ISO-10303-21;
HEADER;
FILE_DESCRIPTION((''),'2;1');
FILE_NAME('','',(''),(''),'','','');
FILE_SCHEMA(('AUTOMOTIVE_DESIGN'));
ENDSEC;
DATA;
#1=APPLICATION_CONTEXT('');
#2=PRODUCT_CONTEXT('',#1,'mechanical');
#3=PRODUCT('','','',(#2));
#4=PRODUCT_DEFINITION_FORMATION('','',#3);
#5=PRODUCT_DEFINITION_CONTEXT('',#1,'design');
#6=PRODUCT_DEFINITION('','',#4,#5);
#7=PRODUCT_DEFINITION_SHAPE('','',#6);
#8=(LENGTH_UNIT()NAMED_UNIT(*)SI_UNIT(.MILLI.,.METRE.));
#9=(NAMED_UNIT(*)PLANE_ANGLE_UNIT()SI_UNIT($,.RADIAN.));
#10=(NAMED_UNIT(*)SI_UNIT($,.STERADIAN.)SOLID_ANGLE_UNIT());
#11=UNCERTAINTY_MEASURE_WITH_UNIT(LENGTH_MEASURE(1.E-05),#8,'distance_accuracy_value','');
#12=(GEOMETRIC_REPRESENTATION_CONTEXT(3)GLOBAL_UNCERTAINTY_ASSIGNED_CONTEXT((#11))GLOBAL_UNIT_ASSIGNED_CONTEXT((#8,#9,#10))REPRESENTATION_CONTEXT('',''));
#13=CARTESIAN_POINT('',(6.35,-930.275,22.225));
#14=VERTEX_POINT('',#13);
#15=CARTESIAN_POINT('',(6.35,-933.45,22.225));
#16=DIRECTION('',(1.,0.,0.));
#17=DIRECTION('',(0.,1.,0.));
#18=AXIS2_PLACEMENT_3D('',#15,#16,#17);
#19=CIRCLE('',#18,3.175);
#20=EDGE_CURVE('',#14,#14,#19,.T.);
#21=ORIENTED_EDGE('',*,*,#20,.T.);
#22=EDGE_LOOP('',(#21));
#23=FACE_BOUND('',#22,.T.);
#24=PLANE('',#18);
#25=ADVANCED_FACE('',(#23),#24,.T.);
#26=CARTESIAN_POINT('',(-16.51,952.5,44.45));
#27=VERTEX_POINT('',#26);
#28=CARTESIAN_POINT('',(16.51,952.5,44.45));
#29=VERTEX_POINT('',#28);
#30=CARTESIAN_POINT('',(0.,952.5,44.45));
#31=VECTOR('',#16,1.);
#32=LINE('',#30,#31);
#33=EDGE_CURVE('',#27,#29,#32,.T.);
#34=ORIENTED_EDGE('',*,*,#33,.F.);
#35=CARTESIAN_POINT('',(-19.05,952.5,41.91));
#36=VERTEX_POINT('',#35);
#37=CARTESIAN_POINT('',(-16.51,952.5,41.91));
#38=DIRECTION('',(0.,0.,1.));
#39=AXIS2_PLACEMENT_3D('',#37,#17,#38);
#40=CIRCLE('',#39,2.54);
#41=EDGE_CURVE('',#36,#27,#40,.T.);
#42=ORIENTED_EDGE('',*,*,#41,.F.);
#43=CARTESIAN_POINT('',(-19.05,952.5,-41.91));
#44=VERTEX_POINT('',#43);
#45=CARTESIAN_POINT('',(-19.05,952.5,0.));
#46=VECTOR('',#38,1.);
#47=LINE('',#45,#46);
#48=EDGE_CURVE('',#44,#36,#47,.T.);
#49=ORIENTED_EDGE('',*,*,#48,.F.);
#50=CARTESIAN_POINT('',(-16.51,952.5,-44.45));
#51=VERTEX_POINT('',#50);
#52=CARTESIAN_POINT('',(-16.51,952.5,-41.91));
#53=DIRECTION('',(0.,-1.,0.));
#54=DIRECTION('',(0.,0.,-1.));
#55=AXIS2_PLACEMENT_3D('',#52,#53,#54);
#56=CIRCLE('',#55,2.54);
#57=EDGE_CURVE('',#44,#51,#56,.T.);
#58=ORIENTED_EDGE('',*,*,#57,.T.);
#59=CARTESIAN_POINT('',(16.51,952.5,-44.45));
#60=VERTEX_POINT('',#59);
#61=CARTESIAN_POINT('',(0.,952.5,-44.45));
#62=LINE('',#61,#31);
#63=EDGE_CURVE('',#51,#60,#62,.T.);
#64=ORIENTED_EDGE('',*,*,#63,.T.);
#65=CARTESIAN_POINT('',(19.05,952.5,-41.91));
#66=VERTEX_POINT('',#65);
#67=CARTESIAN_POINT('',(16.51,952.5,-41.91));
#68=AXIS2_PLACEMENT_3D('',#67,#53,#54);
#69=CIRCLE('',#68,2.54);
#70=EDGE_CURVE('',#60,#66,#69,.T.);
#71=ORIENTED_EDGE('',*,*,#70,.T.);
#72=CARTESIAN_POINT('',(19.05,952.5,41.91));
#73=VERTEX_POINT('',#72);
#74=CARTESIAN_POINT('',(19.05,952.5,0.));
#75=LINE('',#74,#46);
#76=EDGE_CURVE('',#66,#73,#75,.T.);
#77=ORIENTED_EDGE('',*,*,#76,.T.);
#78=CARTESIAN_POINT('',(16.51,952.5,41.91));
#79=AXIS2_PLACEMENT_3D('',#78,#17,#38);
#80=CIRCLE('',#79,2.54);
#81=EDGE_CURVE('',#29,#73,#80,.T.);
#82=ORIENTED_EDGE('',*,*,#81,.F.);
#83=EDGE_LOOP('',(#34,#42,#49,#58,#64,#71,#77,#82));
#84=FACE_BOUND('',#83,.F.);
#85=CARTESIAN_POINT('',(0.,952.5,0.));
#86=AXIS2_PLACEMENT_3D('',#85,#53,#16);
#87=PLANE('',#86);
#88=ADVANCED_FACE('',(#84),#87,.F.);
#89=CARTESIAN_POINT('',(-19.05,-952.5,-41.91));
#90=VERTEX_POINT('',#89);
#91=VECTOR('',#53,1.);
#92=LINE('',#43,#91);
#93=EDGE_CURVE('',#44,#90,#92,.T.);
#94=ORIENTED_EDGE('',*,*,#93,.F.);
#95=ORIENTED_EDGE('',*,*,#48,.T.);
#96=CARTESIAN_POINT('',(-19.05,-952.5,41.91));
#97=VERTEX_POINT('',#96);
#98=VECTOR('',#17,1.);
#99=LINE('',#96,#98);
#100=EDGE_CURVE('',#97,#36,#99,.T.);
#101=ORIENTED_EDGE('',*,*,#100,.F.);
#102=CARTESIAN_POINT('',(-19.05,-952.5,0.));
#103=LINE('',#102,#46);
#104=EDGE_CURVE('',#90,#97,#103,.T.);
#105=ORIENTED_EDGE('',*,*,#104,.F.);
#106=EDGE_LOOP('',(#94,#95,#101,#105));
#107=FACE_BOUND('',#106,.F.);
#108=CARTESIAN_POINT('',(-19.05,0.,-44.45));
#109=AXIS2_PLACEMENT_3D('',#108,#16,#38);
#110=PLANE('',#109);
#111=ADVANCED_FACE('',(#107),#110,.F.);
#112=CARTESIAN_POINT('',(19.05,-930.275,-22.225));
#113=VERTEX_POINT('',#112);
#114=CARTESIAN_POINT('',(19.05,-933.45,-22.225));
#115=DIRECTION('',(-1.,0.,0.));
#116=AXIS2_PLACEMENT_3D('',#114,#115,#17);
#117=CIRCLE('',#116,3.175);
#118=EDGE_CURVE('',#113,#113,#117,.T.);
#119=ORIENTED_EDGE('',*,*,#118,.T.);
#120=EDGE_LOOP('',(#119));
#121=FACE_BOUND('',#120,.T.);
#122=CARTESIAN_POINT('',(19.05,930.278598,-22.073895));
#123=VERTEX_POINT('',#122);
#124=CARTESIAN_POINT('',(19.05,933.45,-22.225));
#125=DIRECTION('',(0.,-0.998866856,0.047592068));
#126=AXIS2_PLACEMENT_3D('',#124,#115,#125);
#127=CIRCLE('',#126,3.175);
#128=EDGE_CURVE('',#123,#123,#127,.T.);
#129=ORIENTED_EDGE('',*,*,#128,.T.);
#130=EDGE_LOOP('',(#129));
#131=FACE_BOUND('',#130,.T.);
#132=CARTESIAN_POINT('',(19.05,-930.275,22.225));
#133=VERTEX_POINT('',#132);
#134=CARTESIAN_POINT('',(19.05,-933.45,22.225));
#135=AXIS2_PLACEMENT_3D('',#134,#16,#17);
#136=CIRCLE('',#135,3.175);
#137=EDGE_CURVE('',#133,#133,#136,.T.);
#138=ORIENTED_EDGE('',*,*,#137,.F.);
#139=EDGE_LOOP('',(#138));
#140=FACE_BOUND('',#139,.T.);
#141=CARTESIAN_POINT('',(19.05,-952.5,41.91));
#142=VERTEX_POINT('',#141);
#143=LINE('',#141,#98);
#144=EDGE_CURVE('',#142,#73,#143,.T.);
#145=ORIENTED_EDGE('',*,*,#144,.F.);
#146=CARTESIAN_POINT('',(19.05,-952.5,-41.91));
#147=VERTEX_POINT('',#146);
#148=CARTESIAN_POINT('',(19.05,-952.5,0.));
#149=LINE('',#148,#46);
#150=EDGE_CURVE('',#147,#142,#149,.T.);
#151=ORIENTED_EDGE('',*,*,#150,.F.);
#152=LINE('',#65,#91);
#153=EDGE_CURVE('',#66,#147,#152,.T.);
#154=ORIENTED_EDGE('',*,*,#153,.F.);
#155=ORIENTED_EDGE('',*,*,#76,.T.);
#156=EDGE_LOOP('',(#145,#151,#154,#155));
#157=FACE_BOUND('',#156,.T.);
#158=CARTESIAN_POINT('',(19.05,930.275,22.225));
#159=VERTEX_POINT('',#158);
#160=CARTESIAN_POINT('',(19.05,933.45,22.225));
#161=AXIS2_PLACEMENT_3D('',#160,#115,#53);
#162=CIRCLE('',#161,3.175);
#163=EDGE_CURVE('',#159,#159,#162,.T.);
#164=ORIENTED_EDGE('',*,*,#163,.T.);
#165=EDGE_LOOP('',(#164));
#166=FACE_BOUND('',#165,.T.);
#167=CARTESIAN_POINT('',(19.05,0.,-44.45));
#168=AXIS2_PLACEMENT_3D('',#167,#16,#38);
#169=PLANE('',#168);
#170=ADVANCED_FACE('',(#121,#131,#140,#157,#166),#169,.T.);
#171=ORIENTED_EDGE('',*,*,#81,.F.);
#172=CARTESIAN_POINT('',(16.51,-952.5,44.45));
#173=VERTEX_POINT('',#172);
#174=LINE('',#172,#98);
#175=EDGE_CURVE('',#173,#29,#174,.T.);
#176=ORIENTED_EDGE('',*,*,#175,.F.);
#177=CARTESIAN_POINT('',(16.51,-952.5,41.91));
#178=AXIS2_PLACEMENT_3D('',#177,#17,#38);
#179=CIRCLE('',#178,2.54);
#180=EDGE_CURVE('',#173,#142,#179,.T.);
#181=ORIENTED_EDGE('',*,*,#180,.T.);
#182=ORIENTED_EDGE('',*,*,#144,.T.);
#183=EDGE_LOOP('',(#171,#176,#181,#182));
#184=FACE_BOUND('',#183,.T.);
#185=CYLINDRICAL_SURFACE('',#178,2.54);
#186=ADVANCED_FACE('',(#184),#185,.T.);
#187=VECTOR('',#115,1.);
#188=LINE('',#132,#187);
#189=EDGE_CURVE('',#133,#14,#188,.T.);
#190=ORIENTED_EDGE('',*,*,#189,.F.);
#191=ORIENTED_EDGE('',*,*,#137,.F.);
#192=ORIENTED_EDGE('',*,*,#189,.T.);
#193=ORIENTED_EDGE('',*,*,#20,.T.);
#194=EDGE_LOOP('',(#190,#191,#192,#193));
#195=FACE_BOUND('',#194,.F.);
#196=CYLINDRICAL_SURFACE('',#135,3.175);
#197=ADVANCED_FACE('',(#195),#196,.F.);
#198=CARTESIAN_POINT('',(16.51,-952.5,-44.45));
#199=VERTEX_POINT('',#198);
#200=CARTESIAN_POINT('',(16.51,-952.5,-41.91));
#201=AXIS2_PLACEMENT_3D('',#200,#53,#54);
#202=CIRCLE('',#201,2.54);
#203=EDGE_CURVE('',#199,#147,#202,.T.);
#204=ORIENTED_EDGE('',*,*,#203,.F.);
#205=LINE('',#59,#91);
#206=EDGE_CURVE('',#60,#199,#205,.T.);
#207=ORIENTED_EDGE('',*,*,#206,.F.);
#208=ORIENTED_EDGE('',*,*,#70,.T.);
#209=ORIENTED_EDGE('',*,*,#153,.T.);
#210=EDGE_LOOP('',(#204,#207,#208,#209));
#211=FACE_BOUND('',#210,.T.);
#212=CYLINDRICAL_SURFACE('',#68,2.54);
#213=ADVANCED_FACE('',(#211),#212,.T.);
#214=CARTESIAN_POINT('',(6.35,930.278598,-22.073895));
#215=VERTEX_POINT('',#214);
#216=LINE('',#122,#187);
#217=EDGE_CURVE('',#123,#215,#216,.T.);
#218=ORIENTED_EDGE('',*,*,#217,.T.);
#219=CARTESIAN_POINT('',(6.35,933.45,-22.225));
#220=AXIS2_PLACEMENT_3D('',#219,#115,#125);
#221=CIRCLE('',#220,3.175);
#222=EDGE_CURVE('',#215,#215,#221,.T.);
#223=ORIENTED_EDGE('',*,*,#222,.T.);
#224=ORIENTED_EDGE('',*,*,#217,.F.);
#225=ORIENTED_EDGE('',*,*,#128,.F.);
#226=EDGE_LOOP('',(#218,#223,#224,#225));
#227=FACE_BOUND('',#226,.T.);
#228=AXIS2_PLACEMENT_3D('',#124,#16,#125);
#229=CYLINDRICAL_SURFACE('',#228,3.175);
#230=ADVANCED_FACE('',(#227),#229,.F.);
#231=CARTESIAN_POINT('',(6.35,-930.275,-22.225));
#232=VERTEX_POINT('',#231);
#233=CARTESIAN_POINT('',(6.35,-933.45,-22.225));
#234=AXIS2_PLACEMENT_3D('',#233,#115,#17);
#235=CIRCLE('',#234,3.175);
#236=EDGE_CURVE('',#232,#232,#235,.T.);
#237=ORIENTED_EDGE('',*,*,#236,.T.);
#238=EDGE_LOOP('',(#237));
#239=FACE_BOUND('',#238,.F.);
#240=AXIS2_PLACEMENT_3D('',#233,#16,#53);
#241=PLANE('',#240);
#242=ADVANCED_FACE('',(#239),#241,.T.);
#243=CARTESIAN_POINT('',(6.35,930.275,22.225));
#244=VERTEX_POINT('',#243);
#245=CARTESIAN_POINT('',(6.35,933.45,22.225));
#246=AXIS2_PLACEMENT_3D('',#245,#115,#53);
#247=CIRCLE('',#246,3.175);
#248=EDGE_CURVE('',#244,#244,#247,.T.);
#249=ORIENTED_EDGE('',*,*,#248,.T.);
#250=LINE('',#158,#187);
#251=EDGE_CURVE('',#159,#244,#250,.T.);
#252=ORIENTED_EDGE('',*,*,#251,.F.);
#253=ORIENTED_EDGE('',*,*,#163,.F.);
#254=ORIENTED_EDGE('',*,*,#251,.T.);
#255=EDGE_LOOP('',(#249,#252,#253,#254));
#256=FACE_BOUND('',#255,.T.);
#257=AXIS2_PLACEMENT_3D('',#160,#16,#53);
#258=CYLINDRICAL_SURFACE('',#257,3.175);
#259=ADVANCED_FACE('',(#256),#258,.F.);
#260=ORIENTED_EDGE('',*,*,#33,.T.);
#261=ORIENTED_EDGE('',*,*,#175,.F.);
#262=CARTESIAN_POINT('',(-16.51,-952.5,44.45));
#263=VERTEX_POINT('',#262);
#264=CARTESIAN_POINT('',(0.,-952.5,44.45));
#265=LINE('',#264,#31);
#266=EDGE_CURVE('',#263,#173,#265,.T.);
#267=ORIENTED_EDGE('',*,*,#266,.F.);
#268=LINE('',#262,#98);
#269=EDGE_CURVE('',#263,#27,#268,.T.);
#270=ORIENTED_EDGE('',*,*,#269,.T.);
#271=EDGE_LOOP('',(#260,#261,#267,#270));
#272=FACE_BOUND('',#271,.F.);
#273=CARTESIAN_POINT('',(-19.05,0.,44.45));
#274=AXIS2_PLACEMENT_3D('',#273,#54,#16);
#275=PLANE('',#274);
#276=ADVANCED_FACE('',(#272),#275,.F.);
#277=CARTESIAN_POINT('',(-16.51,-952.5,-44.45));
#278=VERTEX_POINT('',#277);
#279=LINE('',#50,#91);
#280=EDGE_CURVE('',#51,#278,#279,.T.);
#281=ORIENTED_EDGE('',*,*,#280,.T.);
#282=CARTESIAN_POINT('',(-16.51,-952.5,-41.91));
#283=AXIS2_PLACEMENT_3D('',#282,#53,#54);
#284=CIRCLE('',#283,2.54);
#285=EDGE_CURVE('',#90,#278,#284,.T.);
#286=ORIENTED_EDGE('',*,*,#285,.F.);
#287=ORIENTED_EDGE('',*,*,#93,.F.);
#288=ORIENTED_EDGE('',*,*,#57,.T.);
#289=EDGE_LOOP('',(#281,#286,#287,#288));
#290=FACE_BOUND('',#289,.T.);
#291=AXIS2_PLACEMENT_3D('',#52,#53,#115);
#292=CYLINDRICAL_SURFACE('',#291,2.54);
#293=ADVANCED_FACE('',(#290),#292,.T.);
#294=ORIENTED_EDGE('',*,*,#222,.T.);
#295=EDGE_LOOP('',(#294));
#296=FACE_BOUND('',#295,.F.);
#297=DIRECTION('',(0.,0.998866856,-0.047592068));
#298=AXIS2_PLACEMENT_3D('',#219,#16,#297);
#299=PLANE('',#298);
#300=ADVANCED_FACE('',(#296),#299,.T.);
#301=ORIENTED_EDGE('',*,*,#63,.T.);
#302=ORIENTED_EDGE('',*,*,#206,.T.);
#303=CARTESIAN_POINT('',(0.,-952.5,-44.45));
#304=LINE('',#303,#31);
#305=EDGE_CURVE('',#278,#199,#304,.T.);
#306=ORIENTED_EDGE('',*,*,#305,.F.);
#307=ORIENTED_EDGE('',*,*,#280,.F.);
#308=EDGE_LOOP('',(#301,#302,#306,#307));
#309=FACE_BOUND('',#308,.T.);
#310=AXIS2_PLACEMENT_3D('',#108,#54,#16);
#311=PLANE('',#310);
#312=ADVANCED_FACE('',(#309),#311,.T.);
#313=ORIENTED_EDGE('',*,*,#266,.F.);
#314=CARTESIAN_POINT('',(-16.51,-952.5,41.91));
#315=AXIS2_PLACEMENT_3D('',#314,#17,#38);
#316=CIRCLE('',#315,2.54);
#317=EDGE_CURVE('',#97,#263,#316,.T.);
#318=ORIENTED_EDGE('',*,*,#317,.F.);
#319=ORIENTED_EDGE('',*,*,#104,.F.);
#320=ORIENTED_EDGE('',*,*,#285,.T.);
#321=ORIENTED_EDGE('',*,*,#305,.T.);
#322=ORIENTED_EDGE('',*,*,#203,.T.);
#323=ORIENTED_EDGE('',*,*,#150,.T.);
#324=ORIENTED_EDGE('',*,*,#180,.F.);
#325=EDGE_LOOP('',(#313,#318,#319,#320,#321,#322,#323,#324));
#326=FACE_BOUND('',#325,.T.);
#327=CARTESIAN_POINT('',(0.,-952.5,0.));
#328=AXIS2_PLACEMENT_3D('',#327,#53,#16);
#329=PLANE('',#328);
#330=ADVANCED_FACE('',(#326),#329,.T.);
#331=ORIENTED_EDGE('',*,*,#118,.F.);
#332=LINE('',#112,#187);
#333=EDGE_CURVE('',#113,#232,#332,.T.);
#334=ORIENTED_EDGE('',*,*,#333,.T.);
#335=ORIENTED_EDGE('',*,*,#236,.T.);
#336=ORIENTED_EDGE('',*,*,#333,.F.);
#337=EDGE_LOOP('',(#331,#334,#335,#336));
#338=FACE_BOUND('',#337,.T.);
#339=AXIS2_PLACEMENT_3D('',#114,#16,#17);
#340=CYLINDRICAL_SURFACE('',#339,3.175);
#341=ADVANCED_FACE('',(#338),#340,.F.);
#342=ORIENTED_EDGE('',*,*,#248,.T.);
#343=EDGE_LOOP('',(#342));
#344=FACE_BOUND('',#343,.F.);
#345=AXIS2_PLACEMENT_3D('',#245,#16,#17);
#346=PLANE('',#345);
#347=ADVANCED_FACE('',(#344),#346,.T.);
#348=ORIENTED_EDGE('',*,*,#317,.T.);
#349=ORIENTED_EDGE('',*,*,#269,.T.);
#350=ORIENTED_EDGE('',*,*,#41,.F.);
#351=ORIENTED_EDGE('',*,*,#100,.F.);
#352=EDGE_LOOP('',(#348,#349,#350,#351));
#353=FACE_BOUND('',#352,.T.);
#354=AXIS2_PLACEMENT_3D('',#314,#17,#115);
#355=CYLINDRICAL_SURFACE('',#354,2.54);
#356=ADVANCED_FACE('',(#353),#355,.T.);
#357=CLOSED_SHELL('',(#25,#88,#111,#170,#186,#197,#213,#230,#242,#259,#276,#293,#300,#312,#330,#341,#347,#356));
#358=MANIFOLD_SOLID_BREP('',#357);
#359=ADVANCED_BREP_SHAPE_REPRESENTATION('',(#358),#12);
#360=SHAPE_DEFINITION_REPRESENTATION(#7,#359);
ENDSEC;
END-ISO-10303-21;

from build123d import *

# Parameters (mm, degrees)
F0_W          = 38.1
F0_H          = 88.9
F1_DEPTH      = 952.5
F1_DEPTH_BACK = 952.5
F2_R          = 3.175
F3_DEPTH      = 12.7
F4_R          = 2.54


# Not quite as in the source:
# - a length typed as a fraction of an inch, garbled in the dataset ("3 / 203.2 mm" for 3/8 in), is restored
# - a pattern or mirror of a feature is missing from the dataset's text; its kind, count and spacing are read off the source's solid


with BuildPart() as f1:
    # F0 (on Front) → F1 (new body, two sides)
    with BuildSketch(Plane.XZ) as f1_sk:
        Rectangle(F0_W, F0_H)
    extrude(amount=F1_DEPTH)
    extrude(f1_sk.sketch, amount=-F1_DEPTH_BACK)

    # F2 (on face) → F3 (cut)
    with BuildSketch(Plane.YZ.offset(19.05)):
        with Locations((-933.45, 22.225)):
            Circle(F2_R)
    f3 = extrude(amount=-F3_DEPTH, mode=Mode.SUBTRACT)

    # F3_copies: F3 across plane
    add(f3.mirror(Plane(origin=(0, 0, 0), x_dir=(0, 0.0238027779, 0.9997166737), z_dir=(0, 0.9997166737, -0.0238027779))), mode=Mode.SUBTRACT)

    # F3_copies1: F3 across plane
    add(f3.mirror(Plane(origin=(0, 0, 0), x_dir=(-1, 0, 0), z_dir=(0, 0, -1))), mode=Mode.SUBTRACT)

    # F3_copies2: F3 across plane
    add(f3.mirror(Plane.ZX), mode=Mode.SUBTRACT)

    # F4
    f4_edges = [f1.edges().sort_by_distance(p)[0] for p in [
        (19.05, 0, 44.45),
        (-19.05, 0, 44.45),
        (19.05, 0, -44.45),
        (-19.05, 0, -44.45),
    ]]
    fillet(f4_edges, radius=F4_R)


solid = f1.part
